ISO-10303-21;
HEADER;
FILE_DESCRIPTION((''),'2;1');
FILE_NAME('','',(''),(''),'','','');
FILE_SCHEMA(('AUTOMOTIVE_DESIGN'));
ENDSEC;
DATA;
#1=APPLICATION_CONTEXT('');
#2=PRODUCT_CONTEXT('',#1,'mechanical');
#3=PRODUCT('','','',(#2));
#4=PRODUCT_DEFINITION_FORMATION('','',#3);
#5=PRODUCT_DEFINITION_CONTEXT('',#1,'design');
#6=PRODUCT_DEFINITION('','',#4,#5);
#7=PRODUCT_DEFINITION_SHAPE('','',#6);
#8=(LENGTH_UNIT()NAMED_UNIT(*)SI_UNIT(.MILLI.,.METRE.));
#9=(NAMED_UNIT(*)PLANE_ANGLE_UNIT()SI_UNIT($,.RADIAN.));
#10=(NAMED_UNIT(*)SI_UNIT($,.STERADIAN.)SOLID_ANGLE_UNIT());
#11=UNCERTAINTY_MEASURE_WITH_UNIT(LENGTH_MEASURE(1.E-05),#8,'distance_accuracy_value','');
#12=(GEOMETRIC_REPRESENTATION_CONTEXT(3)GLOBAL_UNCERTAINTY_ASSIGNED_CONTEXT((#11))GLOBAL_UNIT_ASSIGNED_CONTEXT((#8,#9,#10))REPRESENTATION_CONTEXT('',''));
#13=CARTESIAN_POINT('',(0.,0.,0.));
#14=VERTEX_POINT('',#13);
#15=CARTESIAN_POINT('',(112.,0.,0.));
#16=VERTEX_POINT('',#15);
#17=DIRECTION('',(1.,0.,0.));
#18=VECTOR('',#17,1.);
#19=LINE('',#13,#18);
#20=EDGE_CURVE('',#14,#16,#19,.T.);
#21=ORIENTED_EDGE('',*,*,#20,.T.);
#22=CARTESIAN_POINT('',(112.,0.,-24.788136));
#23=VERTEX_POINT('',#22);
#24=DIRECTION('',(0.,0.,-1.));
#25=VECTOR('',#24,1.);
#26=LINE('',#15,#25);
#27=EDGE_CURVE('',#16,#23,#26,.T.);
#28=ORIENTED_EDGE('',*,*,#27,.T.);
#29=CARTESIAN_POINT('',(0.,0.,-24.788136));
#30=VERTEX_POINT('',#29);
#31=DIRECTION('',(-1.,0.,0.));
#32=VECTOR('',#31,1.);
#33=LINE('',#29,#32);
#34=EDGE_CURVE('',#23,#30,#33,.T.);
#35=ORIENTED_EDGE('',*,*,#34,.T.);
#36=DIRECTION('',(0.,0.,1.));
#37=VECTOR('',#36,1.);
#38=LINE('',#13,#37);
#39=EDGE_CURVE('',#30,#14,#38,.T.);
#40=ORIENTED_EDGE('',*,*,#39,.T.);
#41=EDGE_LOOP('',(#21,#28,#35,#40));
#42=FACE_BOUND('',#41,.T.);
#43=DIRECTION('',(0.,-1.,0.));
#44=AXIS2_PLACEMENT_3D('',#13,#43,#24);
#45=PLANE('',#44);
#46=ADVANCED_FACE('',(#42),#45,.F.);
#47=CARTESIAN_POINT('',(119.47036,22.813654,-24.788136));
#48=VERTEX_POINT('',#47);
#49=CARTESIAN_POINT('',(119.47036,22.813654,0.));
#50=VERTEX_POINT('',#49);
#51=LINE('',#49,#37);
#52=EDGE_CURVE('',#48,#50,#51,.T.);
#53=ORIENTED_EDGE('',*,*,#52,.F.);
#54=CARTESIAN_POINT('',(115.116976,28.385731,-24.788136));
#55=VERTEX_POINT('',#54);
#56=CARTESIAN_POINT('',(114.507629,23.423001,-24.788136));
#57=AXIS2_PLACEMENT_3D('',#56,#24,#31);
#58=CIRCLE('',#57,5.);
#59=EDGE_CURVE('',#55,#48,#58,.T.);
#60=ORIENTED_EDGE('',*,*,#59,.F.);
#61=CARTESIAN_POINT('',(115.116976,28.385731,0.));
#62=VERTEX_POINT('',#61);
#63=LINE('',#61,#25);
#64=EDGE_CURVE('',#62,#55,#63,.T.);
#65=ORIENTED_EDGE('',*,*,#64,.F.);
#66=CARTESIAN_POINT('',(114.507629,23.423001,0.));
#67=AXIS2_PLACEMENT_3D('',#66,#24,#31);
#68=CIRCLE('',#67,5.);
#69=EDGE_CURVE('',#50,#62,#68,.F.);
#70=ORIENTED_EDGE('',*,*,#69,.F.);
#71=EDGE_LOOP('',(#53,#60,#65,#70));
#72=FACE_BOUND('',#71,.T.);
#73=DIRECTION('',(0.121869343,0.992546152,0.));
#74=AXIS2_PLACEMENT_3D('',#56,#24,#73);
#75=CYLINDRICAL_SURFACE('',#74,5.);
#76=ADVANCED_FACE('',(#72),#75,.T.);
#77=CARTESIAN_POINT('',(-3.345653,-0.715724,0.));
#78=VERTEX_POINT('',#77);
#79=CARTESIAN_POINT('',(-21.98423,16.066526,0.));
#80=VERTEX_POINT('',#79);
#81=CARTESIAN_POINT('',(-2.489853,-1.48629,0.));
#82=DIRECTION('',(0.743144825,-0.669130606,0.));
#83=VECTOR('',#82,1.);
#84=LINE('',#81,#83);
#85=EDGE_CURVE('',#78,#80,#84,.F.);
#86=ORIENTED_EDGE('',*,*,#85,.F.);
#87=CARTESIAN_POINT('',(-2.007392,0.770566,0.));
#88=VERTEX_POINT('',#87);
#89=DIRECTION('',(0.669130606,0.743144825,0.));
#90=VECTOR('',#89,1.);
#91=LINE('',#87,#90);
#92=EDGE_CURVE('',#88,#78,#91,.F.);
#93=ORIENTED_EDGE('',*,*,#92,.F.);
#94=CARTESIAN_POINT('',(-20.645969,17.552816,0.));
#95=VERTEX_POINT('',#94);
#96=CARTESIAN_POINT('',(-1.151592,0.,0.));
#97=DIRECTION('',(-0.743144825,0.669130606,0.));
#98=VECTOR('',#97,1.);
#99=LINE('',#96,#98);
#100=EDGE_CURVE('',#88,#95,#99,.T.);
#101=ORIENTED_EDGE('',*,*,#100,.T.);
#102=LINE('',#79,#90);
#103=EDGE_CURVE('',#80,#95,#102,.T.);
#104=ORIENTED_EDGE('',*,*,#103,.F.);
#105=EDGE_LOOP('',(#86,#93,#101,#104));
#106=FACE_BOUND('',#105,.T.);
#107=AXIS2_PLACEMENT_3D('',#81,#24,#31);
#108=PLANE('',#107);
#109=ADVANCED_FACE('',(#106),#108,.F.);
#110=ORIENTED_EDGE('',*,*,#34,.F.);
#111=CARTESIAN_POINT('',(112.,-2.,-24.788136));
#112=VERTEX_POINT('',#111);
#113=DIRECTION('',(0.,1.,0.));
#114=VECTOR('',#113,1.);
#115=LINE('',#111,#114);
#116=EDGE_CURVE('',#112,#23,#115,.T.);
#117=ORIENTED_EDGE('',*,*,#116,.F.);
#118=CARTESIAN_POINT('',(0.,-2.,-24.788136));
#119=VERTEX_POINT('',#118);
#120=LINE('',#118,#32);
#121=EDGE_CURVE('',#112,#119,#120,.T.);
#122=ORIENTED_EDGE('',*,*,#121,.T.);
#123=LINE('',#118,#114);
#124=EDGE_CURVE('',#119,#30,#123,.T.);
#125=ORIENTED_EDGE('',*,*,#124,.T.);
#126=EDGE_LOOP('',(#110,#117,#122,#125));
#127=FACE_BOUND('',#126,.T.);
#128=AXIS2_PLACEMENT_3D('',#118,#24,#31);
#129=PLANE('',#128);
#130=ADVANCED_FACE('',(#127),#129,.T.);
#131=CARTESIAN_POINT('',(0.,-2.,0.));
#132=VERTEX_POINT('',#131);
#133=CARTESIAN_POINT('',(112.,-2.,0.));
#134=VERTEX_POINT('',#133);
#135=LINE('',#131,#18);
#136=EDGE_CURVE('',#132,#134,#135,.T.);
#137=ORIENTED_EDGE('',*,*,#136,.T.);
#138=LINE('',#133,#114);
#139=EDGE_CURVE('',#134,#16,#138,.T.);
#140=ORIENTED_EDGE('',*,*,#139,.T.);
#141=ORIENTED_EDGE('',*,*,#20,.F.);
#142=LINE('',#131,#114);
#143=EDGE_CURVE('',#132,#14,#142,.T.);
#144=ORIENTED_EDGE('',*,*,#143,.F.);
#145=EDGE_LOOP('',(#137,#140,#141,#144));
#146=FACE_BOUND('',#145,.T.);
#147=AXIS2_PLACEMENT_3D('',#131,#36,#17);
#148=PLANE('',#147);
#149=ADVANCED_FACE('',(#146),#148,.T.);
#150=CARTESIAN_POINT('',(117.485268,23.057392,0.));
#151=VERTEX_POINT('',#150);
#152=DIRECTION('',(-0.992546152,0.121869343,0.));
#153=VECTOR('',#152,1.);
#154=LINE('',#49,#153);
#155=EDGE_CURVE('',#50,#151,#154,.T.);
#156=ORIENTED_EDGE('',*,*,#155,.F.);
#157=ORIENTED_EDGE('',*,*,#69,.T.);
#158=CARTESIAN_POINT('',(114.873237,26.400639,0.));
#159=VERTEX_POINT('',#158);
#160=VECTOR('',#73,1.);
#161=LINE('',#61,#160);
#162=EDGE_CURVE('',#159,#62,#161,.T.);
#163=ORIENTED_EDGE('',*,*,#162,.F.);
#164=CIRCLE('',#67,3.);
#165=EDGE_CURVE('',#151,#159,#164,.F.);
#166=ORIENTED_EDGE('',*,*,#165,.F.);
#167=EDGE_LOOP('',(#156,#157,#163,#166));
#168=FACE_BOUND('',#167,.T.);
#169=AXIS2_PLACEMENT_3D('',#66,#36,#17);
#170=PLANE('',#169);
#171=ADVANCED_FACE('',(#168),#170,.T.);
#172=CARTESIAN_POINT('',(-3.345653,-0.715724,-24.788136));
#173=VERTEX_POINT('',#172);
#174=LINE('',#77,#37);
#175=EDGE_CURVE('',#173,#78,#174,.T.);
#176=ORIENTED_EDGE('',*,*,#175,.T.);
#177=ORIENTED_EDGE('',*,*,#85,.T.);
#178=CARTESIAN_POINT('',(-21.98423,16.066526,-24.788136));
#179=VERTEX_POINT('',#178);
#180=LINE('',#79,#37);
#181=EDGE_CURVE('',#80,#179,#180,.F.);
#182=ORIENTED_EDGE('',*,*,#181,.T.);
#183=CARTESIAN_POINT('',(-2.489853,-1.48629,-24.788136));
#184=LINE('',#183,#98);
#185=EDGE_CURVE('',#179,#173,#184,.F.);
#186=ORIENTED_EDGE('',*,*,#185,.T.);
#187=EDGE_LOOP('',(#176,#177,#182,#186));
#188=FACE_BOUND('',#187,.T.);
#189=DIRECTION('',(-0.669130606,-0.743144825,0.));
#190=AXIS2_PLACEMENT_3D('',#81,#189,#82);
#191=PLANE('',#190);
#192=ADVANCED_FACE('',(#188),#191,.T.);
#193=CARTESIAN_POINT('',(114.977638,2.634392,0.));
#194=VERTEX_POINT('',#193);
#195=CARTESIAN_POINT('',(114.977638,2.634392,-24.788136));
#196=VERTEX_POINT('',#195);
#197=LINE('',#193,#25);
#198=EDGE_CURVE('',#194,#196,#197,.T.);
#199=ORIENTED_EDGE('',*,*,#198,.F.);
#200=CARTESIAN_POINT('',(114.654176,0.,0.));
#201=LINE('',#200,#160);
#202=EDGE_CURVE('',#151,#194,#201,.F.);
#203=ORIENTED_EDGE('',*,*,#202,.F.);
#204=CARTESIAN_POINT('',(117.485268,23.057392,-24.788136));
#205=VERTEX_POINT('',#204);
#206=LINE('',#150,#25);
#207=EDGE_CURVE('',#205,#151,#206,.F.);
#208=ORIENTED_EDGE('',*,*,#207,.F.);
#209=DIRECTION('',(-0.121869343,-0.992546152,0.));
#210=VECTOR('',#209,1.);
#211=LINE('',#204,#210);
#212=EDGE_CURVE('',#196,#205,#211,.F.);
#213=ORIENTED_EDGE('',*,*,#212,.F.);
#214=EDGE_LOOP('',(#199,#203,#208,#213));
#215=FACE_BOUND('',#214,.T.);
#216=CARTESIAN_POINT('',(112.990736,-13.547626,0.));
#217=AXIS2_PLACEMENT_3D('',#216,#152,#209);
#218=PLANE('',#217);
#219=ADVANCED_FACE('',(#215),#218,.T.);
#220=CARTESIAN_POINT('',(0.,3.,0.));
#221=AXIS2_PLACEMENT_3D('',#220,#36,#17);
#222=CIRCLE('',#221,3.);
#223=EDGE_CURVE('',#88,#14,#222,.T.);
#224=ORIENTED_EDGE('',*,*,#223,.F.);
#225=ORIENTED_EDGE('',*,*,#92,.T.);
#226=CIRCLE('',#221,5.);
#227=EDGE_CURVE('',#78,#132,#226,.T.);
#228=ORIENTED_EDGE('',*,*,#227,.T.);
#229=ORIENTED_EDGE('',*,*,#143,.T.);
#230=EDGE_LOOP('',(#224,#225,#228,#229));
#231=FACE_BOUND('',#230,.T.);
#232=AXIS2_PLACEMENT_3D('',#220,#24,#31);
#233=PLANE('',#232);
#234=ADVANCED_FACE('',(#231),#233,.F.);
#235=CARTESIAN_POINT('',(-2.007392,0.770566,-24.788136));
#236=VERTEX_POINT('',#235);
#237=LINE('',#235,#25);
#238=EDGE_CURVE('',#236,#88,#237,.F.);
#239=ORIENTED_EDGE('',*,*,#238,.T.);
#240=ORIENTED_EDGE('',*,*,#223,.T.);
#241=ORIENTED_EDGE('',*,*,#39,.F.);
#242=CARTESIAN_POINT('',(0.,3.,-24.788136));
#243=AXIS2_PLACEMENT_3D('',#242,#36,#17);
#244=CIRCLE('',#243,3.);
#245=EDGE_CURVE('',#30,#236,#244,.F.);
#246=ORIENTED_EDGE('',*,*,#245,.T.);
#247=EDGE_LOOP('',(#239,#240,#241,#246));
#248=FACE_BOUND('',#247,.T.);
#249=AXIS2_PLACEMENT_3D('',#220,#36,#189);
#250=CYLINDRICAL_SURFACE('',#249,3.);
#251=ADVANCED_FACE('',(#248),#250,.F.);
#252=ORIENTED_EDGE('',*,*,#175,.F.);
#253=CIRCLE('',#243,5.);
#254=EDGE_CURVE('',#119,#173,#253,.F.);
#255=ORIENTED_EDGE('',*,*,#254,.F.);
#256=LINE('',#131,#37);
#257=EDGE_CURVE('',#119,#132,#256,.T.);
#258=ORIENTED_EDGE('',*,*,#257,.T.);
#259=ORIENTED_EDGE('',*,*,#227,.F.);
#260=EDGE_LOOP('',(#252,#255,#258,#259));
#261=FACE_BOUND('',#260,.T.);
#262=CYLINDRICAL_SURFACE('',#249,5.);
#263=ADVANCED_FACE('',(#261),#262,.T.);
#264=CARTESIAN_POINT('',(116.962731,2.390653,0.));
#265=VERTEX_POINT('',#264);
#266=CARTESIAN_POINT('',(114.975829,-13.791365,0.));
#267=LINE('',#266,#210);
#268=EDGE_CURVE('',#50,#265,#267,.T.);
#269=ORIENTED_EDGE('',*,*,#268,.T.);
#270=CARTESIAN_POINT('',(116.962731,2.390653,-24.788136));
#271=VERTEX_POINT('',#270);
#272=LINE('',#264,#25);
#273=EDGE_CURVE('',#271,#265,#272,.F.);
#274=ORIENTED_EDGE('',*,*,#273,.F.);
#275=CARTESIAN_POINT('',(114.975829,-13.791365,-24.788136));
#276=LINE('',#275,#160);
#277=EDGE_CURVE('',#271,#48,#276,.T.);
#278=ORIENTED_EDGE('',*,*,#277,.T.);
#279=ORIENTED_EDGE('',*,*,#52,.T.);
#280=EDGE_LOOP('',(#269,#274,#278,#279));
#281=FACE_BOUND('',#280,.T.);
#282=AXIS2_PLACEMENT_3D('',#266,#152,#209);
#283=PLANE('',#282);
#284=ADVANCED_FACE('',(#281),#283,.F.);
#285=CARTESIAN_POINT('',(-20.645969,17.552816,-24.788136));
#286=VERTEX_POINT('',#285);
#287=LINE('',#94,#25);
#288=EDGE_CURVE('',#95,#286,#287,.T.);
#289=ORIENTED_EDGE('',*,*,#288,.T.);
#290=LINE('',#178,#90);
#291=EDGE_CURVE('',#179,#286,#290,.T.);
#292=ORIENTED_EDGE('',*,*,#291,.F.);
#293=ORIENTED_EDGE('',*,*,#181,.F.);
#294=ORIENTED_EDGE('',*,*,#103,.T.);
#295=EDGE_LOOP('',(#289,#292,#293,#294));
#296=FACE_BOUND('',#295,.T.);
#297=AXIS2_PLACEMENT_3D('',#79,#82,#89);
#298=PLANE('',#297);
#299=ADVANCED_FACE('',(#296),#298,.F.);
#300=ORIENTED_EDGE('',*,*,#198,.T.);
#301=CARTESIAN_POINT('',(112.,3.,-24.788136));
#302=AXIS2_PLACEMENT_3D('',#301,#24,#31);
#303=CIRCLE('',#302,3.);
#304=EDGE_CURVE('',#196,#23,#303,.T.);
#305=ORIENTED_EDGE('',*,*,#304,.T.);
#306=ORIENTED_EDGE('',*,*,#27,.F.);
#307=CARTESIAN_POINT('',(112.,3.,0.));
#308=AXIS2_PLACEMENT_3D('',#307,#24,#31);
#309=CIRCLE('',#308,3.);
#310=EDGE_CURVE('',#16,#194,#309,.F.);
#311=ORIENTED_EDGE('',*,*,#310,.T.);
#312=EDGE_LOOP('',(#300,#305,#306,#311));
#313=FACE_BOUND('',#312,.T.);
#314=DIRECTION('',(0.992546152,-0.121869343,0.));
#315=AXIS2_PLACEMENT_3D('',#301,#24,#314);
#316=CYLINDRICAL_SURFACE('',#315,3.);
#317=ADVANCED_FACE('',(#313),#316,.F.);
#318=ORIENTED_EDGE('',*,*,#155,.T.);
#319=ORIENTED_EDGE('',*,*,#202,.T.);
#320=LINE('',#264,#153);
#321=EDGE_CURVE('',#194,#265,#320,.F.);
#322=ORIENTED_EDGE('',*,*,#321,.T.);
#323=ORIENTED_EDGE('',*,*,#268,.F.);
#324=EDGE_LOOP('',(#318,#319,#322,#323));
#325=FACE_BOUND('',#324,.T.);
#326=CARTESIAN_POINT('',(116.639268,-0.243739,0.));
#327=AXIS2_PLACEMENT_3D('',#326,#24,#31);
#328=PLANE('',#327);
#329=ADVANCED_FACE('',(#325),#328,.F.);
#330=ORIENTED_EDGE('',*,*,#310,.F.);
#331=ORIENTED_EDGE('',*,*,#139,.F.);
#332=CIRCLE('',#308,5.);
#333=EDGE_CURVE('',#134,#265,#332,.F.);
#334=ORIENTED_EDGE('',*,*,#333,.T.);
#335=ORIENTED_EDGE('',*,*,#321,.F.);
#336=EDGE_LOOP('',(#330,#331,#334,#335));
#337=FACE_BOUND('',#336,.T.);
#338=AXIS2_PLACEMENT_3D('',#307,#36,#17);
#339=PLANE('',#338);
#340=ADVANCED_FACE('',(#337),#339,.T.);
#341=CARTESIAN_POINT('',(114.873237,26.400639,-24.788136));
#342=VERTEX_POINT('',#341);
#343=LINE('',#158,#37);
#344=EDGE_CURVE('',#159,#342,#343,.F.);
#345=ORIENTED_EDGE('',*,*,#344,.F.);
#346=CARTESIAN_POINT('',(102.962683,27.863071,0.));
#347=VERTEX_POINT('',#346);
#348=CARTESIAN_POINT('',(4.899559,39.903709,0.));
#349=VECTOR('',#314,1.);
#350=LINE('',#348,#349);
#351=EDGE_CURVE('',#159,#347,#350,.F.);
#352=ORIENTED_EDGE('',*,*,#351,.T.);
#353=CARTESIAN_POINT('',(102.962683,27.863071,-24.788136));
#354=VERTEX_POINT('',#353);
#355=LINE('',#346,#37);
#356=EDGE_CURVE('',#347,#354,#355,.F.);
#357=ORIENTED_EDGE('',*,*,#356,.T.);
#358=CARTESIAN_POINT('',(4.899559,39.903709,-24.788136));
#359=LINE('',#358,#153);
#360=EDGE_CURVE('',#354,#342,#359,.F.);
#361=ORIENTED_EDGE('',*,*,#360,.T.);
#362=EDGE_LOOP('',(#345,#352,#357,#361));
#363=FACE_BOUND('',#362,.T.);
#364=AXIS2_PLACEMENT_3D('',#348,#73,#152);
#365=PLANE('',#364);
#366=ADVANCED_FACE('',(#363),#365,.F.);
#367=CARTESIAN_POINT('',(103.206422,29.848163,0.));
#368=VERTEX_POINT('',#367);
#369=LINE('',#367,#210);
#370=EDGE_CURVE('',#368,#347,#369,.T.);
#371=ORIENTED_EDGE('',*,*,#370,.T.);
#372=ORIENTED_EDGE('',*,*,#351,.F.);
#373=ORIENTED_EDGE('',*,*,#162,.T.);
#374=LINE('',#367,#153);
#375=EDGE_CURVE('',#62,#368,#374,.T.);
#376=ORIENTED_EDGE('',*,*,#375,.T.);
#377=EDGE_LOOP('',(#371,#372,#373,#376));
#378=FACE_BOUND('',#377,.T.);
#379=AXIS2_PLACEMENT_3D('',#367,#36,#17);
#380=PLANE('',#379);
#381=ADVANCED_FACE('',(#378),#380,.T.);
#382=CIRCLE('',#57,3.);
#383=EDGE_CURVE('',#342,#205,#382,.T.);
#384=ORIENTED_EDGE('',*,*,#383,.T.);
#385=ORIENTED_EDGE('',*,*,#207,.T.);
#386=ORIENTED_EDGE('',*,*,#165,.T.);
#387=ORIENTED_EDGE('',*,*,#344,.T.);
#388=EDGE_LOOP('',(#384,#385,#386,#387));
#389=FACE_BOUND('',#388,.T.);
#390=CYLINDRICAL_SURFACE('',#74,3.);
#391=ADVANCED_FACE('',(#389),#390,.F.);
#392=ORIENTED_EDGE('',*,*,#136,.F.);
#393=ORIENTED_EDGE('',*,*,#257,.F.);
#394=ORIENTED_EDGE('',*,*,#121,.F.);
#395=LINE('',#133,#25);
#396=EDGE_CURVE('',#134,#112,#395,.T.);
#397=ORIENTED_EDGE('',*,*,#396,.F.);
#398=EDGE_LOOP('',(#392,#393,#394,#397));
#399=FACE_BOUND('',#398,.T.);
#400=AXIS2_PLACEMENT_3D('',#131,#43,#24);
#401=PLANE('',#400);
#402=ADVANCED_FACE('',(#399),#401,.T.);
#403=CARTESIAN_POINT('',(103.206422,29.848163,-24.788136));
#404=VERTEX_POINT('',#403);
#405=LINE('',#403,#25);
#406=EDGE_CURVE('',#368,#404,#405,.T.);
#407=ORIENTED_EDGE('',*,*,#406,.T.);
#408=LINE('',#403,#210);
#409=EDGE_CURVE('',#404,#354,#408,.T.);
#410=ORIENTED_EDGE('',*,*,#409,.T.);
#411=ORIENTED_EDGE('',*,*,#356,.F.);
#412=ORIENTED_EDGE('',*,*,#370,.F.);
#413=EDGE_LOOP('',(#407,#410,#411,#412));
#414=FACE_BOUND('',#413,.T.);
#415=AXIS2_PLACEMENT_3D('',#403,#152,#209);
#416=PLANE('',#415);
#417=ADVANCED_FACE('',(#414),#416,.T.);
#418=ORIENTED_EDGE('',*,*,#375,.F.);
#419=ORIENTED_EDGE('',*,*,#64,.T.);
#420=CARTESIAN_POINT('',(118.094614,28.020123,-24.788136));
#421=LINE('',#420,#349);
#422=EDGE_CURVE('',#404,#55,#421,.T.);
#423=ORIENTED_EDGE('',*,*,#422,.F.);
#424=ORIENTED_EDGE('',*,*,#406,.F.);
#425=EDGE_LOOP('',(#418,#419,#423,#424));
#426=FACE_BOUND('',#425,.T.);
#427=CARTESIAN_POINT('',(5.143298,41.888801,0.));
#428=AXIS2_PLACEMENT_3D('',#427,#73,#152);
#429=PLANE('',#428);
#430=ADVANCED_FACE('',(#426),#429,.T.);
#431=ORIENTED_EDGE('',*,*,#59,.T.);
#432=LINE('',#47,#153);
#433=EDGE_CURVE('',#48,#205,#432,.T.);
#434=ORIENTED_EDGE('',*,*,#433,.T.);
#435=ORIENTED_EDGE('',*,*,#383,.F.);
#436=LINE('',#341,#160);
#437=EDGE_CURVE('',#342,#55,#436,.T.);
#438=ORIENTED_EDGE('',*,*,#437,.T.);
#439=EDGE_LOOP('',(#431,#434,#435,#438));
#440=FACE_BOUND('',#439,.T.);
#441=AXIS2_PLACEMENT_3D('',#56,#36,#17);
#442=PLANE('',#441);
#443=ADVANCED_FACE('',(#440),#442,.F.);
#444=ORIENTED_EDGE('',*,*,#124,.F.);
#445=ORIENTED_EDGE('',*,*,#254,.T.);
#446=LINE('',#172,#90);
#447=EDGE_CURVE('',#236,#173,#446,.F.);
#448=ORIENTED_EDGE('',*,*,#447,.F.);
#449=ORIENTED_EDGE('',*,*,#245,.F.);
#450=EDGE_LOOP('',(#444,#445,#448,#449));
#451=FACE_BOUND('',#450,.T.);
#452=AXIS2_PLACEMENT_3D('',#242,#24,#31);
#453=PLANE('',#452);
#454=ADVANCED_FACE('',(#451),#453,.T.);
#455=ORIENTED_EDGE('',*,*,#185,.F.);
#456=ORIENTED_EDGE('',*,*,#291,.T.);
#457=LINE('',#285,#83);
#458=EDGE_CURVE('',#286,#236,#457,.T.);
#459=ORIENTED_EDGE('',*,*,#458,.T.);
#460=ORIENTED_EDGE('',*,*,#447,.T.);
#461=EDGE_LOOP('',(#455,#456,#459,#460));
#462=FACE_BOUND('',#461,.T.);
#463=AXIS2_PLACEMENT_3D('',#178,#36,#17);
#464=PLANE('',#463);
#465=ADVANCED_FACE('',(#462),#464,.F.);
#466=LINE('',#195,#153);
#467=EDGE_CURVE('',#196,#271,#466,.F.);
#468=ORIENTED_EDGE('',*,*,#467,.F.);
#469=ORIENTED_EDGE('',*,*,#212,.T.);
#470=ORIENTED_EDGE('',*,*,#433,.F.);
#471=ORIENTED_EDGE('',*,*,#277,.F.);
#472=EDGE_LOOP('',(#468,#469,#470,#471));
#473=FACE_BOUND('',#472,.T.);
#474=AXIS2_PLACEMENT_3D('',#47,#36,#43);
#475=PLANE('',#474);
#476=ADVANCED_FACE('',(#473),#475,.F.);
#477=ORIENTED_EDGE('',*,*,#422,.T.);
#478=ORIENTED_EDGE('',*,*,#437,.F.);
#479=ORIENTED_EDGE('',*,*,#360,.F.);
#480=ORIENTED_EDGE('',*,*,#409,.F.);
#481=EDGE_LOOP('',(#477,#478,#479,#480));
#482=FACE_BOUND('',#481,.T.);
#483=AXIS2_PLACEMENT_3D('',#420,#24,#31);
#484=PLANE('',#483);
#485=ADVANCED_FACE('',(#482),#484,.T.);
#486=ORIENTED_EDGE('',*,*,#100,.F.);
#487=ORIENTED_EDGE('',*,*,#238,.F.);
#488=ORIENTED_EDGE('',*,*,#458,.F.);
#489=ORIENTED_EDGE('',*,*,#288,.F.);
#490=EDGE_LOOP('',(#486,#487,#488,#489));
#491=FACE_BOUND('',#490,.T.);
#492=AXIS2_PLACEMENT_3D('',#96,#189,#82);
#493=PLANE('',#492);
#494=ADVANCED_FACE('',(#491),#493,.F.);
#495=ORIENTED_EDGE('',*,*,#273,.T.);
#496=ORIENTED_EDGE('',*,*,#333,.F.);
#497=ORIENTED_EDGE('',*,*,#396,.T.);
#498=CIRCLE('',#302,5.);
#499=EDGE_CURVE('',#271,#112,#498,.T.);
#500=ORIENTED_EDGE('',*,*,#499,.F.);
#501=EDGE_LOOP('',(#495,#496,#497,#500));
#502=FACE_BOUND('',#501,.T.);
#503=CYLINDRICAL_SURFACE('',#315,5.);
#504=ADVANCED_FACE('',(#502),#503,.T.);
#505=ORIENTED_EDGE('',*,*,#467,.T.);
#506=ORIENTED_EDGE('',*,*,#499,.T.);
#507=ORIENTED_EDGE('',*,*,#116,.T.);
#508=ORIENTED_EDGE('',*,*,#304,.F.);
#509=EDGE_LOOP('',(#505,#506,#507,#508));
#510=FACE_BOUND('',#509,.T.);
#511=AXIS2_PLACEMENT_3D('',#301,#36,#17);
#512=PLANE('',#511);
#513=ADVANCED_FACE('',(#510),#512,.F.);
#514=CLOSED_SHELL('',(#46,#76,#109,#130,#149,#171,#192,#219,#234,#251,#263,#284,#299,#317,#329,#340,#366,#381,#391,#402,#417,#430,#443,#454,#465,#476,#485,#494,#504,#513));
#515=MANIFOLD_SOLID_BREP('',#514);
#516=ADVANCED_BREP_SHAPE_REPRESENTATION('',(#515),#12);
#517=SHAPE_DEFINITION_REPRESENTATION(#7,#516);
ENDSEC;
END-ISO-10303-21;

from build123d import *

# Parameters (mm, degrees)
SKETCH_1_W             = 112
SKETCH_1_H             = 24.788135593
SM_BASE_FLANGE_1_DEPTH = 2
SM_EDGE_FLANGE_1_DEPTH = 24.788135593
SM_EDGE_FLANGE_2_DEPTH = 24.788135593
SM_EDGE_FLANGE_3_DEPTH = 24.788135593


# Sheet-metal steps are written as plain solids
with BuildPart() as part:
    # Sketch 1 → Базовая кромка1 (new body)
    with BuildSketch(Plane(origin=(0, 0, 0), x_dir=(1, 0, 0), z_dir=(0, 1, 0))):
        with Locations((56, 12.394067796)):
            Rectangle(SKETCH_1_W, SKETCH_1_H)
    extrude(amount=-SM_BASE_FLANGE_1_DEPTH)

    # Ребро-кромка1 section (across the edge) → Ребро-кромка1 (add)
    with BuildSketch(Plane(origin=(114.654175794, 0, 0), x_dir=(-0.9925461516413217, 0.12186934340515113, 0), z_dir=(0, 0, -1))):
        with BuildLine():
            Line((-2, 2.654175794), (-2, 23.230549471))
            Line((-2, 23.230549471), (0, 23.230549471))
            Line((0, 23.230549471), (0, 2.654175794))
            ThreePointArc((0, 2.654175794), (0.753132838, 0.666315649), (2.63439197, -0.323462661))
            Line((2.63439197, -0.323462661), (2.390653283, -2.308554965))
            ThreePointArc((2.390653283, -2.308554965), (-0.744778604, -0.658924447), (-2, 2.654175794))
        make_face()
    extrude(amount=SM_EDGE_FLANGE_1_DEPTH)

    # Ребро-кромка2 section (across the edge) → Ребро-кромка2 (add)
    with BuildSketch(Plane(origin=(117.850875635, 26.035030933, 0), x_dir=(-0.12186934340515466, -0.9925461516413212, 0), z_dir=(0, 0, -1))):
        with BuildLine():
            Line((-2, 3), (-2, 15))
            Line((-2, 15), (0, 15))
            Line((0, 15), (0, 3))
            ThreePointArc((0, 3), (0.878679656, 0.878679656), (3, 0))
            Line((3, 0), (3, -2))
            ThreePointArc((3, -2), (-0.535533906, -0.535533906), (-2, 3))
        make_face()
    extrude(amount=SM_EDGE_FLANGE_2_DEPTH)

    # Ребро-кромка3 section (across the edge) → Ребро-кромка3 (add)
    with BuildSketch(Plane(origin=(-1.151592105, 0, -24.788135593), x_dir=(0.6691306063588548, 0.7431448254773974, 0), z_dir=(0, 0, 1))):
        with BuildLine():
            Line((-2, 1.151592105), (-2, 26.23227193))
            Line((-2, 26.23227193), (0, 26.23227193))
            Line((0, 26.23227193), (0, 1.151592105))
            ThreePointArc((0, 1.151592105), (0.199258721, 0.076488256), (0.770565524, -0.855799714))
            Line((0.770565524, -0.855799714), (-0.715724127, -2.194060927))
            ThreePointArc((-0.715724127, -2.194060927), (-1.667902132, -0.640247643), (-2, 1.151592105))
        make_face()
    extrude(amount=SM_EDGE_FLANGE_3_DEPTH)


solid = part.part
